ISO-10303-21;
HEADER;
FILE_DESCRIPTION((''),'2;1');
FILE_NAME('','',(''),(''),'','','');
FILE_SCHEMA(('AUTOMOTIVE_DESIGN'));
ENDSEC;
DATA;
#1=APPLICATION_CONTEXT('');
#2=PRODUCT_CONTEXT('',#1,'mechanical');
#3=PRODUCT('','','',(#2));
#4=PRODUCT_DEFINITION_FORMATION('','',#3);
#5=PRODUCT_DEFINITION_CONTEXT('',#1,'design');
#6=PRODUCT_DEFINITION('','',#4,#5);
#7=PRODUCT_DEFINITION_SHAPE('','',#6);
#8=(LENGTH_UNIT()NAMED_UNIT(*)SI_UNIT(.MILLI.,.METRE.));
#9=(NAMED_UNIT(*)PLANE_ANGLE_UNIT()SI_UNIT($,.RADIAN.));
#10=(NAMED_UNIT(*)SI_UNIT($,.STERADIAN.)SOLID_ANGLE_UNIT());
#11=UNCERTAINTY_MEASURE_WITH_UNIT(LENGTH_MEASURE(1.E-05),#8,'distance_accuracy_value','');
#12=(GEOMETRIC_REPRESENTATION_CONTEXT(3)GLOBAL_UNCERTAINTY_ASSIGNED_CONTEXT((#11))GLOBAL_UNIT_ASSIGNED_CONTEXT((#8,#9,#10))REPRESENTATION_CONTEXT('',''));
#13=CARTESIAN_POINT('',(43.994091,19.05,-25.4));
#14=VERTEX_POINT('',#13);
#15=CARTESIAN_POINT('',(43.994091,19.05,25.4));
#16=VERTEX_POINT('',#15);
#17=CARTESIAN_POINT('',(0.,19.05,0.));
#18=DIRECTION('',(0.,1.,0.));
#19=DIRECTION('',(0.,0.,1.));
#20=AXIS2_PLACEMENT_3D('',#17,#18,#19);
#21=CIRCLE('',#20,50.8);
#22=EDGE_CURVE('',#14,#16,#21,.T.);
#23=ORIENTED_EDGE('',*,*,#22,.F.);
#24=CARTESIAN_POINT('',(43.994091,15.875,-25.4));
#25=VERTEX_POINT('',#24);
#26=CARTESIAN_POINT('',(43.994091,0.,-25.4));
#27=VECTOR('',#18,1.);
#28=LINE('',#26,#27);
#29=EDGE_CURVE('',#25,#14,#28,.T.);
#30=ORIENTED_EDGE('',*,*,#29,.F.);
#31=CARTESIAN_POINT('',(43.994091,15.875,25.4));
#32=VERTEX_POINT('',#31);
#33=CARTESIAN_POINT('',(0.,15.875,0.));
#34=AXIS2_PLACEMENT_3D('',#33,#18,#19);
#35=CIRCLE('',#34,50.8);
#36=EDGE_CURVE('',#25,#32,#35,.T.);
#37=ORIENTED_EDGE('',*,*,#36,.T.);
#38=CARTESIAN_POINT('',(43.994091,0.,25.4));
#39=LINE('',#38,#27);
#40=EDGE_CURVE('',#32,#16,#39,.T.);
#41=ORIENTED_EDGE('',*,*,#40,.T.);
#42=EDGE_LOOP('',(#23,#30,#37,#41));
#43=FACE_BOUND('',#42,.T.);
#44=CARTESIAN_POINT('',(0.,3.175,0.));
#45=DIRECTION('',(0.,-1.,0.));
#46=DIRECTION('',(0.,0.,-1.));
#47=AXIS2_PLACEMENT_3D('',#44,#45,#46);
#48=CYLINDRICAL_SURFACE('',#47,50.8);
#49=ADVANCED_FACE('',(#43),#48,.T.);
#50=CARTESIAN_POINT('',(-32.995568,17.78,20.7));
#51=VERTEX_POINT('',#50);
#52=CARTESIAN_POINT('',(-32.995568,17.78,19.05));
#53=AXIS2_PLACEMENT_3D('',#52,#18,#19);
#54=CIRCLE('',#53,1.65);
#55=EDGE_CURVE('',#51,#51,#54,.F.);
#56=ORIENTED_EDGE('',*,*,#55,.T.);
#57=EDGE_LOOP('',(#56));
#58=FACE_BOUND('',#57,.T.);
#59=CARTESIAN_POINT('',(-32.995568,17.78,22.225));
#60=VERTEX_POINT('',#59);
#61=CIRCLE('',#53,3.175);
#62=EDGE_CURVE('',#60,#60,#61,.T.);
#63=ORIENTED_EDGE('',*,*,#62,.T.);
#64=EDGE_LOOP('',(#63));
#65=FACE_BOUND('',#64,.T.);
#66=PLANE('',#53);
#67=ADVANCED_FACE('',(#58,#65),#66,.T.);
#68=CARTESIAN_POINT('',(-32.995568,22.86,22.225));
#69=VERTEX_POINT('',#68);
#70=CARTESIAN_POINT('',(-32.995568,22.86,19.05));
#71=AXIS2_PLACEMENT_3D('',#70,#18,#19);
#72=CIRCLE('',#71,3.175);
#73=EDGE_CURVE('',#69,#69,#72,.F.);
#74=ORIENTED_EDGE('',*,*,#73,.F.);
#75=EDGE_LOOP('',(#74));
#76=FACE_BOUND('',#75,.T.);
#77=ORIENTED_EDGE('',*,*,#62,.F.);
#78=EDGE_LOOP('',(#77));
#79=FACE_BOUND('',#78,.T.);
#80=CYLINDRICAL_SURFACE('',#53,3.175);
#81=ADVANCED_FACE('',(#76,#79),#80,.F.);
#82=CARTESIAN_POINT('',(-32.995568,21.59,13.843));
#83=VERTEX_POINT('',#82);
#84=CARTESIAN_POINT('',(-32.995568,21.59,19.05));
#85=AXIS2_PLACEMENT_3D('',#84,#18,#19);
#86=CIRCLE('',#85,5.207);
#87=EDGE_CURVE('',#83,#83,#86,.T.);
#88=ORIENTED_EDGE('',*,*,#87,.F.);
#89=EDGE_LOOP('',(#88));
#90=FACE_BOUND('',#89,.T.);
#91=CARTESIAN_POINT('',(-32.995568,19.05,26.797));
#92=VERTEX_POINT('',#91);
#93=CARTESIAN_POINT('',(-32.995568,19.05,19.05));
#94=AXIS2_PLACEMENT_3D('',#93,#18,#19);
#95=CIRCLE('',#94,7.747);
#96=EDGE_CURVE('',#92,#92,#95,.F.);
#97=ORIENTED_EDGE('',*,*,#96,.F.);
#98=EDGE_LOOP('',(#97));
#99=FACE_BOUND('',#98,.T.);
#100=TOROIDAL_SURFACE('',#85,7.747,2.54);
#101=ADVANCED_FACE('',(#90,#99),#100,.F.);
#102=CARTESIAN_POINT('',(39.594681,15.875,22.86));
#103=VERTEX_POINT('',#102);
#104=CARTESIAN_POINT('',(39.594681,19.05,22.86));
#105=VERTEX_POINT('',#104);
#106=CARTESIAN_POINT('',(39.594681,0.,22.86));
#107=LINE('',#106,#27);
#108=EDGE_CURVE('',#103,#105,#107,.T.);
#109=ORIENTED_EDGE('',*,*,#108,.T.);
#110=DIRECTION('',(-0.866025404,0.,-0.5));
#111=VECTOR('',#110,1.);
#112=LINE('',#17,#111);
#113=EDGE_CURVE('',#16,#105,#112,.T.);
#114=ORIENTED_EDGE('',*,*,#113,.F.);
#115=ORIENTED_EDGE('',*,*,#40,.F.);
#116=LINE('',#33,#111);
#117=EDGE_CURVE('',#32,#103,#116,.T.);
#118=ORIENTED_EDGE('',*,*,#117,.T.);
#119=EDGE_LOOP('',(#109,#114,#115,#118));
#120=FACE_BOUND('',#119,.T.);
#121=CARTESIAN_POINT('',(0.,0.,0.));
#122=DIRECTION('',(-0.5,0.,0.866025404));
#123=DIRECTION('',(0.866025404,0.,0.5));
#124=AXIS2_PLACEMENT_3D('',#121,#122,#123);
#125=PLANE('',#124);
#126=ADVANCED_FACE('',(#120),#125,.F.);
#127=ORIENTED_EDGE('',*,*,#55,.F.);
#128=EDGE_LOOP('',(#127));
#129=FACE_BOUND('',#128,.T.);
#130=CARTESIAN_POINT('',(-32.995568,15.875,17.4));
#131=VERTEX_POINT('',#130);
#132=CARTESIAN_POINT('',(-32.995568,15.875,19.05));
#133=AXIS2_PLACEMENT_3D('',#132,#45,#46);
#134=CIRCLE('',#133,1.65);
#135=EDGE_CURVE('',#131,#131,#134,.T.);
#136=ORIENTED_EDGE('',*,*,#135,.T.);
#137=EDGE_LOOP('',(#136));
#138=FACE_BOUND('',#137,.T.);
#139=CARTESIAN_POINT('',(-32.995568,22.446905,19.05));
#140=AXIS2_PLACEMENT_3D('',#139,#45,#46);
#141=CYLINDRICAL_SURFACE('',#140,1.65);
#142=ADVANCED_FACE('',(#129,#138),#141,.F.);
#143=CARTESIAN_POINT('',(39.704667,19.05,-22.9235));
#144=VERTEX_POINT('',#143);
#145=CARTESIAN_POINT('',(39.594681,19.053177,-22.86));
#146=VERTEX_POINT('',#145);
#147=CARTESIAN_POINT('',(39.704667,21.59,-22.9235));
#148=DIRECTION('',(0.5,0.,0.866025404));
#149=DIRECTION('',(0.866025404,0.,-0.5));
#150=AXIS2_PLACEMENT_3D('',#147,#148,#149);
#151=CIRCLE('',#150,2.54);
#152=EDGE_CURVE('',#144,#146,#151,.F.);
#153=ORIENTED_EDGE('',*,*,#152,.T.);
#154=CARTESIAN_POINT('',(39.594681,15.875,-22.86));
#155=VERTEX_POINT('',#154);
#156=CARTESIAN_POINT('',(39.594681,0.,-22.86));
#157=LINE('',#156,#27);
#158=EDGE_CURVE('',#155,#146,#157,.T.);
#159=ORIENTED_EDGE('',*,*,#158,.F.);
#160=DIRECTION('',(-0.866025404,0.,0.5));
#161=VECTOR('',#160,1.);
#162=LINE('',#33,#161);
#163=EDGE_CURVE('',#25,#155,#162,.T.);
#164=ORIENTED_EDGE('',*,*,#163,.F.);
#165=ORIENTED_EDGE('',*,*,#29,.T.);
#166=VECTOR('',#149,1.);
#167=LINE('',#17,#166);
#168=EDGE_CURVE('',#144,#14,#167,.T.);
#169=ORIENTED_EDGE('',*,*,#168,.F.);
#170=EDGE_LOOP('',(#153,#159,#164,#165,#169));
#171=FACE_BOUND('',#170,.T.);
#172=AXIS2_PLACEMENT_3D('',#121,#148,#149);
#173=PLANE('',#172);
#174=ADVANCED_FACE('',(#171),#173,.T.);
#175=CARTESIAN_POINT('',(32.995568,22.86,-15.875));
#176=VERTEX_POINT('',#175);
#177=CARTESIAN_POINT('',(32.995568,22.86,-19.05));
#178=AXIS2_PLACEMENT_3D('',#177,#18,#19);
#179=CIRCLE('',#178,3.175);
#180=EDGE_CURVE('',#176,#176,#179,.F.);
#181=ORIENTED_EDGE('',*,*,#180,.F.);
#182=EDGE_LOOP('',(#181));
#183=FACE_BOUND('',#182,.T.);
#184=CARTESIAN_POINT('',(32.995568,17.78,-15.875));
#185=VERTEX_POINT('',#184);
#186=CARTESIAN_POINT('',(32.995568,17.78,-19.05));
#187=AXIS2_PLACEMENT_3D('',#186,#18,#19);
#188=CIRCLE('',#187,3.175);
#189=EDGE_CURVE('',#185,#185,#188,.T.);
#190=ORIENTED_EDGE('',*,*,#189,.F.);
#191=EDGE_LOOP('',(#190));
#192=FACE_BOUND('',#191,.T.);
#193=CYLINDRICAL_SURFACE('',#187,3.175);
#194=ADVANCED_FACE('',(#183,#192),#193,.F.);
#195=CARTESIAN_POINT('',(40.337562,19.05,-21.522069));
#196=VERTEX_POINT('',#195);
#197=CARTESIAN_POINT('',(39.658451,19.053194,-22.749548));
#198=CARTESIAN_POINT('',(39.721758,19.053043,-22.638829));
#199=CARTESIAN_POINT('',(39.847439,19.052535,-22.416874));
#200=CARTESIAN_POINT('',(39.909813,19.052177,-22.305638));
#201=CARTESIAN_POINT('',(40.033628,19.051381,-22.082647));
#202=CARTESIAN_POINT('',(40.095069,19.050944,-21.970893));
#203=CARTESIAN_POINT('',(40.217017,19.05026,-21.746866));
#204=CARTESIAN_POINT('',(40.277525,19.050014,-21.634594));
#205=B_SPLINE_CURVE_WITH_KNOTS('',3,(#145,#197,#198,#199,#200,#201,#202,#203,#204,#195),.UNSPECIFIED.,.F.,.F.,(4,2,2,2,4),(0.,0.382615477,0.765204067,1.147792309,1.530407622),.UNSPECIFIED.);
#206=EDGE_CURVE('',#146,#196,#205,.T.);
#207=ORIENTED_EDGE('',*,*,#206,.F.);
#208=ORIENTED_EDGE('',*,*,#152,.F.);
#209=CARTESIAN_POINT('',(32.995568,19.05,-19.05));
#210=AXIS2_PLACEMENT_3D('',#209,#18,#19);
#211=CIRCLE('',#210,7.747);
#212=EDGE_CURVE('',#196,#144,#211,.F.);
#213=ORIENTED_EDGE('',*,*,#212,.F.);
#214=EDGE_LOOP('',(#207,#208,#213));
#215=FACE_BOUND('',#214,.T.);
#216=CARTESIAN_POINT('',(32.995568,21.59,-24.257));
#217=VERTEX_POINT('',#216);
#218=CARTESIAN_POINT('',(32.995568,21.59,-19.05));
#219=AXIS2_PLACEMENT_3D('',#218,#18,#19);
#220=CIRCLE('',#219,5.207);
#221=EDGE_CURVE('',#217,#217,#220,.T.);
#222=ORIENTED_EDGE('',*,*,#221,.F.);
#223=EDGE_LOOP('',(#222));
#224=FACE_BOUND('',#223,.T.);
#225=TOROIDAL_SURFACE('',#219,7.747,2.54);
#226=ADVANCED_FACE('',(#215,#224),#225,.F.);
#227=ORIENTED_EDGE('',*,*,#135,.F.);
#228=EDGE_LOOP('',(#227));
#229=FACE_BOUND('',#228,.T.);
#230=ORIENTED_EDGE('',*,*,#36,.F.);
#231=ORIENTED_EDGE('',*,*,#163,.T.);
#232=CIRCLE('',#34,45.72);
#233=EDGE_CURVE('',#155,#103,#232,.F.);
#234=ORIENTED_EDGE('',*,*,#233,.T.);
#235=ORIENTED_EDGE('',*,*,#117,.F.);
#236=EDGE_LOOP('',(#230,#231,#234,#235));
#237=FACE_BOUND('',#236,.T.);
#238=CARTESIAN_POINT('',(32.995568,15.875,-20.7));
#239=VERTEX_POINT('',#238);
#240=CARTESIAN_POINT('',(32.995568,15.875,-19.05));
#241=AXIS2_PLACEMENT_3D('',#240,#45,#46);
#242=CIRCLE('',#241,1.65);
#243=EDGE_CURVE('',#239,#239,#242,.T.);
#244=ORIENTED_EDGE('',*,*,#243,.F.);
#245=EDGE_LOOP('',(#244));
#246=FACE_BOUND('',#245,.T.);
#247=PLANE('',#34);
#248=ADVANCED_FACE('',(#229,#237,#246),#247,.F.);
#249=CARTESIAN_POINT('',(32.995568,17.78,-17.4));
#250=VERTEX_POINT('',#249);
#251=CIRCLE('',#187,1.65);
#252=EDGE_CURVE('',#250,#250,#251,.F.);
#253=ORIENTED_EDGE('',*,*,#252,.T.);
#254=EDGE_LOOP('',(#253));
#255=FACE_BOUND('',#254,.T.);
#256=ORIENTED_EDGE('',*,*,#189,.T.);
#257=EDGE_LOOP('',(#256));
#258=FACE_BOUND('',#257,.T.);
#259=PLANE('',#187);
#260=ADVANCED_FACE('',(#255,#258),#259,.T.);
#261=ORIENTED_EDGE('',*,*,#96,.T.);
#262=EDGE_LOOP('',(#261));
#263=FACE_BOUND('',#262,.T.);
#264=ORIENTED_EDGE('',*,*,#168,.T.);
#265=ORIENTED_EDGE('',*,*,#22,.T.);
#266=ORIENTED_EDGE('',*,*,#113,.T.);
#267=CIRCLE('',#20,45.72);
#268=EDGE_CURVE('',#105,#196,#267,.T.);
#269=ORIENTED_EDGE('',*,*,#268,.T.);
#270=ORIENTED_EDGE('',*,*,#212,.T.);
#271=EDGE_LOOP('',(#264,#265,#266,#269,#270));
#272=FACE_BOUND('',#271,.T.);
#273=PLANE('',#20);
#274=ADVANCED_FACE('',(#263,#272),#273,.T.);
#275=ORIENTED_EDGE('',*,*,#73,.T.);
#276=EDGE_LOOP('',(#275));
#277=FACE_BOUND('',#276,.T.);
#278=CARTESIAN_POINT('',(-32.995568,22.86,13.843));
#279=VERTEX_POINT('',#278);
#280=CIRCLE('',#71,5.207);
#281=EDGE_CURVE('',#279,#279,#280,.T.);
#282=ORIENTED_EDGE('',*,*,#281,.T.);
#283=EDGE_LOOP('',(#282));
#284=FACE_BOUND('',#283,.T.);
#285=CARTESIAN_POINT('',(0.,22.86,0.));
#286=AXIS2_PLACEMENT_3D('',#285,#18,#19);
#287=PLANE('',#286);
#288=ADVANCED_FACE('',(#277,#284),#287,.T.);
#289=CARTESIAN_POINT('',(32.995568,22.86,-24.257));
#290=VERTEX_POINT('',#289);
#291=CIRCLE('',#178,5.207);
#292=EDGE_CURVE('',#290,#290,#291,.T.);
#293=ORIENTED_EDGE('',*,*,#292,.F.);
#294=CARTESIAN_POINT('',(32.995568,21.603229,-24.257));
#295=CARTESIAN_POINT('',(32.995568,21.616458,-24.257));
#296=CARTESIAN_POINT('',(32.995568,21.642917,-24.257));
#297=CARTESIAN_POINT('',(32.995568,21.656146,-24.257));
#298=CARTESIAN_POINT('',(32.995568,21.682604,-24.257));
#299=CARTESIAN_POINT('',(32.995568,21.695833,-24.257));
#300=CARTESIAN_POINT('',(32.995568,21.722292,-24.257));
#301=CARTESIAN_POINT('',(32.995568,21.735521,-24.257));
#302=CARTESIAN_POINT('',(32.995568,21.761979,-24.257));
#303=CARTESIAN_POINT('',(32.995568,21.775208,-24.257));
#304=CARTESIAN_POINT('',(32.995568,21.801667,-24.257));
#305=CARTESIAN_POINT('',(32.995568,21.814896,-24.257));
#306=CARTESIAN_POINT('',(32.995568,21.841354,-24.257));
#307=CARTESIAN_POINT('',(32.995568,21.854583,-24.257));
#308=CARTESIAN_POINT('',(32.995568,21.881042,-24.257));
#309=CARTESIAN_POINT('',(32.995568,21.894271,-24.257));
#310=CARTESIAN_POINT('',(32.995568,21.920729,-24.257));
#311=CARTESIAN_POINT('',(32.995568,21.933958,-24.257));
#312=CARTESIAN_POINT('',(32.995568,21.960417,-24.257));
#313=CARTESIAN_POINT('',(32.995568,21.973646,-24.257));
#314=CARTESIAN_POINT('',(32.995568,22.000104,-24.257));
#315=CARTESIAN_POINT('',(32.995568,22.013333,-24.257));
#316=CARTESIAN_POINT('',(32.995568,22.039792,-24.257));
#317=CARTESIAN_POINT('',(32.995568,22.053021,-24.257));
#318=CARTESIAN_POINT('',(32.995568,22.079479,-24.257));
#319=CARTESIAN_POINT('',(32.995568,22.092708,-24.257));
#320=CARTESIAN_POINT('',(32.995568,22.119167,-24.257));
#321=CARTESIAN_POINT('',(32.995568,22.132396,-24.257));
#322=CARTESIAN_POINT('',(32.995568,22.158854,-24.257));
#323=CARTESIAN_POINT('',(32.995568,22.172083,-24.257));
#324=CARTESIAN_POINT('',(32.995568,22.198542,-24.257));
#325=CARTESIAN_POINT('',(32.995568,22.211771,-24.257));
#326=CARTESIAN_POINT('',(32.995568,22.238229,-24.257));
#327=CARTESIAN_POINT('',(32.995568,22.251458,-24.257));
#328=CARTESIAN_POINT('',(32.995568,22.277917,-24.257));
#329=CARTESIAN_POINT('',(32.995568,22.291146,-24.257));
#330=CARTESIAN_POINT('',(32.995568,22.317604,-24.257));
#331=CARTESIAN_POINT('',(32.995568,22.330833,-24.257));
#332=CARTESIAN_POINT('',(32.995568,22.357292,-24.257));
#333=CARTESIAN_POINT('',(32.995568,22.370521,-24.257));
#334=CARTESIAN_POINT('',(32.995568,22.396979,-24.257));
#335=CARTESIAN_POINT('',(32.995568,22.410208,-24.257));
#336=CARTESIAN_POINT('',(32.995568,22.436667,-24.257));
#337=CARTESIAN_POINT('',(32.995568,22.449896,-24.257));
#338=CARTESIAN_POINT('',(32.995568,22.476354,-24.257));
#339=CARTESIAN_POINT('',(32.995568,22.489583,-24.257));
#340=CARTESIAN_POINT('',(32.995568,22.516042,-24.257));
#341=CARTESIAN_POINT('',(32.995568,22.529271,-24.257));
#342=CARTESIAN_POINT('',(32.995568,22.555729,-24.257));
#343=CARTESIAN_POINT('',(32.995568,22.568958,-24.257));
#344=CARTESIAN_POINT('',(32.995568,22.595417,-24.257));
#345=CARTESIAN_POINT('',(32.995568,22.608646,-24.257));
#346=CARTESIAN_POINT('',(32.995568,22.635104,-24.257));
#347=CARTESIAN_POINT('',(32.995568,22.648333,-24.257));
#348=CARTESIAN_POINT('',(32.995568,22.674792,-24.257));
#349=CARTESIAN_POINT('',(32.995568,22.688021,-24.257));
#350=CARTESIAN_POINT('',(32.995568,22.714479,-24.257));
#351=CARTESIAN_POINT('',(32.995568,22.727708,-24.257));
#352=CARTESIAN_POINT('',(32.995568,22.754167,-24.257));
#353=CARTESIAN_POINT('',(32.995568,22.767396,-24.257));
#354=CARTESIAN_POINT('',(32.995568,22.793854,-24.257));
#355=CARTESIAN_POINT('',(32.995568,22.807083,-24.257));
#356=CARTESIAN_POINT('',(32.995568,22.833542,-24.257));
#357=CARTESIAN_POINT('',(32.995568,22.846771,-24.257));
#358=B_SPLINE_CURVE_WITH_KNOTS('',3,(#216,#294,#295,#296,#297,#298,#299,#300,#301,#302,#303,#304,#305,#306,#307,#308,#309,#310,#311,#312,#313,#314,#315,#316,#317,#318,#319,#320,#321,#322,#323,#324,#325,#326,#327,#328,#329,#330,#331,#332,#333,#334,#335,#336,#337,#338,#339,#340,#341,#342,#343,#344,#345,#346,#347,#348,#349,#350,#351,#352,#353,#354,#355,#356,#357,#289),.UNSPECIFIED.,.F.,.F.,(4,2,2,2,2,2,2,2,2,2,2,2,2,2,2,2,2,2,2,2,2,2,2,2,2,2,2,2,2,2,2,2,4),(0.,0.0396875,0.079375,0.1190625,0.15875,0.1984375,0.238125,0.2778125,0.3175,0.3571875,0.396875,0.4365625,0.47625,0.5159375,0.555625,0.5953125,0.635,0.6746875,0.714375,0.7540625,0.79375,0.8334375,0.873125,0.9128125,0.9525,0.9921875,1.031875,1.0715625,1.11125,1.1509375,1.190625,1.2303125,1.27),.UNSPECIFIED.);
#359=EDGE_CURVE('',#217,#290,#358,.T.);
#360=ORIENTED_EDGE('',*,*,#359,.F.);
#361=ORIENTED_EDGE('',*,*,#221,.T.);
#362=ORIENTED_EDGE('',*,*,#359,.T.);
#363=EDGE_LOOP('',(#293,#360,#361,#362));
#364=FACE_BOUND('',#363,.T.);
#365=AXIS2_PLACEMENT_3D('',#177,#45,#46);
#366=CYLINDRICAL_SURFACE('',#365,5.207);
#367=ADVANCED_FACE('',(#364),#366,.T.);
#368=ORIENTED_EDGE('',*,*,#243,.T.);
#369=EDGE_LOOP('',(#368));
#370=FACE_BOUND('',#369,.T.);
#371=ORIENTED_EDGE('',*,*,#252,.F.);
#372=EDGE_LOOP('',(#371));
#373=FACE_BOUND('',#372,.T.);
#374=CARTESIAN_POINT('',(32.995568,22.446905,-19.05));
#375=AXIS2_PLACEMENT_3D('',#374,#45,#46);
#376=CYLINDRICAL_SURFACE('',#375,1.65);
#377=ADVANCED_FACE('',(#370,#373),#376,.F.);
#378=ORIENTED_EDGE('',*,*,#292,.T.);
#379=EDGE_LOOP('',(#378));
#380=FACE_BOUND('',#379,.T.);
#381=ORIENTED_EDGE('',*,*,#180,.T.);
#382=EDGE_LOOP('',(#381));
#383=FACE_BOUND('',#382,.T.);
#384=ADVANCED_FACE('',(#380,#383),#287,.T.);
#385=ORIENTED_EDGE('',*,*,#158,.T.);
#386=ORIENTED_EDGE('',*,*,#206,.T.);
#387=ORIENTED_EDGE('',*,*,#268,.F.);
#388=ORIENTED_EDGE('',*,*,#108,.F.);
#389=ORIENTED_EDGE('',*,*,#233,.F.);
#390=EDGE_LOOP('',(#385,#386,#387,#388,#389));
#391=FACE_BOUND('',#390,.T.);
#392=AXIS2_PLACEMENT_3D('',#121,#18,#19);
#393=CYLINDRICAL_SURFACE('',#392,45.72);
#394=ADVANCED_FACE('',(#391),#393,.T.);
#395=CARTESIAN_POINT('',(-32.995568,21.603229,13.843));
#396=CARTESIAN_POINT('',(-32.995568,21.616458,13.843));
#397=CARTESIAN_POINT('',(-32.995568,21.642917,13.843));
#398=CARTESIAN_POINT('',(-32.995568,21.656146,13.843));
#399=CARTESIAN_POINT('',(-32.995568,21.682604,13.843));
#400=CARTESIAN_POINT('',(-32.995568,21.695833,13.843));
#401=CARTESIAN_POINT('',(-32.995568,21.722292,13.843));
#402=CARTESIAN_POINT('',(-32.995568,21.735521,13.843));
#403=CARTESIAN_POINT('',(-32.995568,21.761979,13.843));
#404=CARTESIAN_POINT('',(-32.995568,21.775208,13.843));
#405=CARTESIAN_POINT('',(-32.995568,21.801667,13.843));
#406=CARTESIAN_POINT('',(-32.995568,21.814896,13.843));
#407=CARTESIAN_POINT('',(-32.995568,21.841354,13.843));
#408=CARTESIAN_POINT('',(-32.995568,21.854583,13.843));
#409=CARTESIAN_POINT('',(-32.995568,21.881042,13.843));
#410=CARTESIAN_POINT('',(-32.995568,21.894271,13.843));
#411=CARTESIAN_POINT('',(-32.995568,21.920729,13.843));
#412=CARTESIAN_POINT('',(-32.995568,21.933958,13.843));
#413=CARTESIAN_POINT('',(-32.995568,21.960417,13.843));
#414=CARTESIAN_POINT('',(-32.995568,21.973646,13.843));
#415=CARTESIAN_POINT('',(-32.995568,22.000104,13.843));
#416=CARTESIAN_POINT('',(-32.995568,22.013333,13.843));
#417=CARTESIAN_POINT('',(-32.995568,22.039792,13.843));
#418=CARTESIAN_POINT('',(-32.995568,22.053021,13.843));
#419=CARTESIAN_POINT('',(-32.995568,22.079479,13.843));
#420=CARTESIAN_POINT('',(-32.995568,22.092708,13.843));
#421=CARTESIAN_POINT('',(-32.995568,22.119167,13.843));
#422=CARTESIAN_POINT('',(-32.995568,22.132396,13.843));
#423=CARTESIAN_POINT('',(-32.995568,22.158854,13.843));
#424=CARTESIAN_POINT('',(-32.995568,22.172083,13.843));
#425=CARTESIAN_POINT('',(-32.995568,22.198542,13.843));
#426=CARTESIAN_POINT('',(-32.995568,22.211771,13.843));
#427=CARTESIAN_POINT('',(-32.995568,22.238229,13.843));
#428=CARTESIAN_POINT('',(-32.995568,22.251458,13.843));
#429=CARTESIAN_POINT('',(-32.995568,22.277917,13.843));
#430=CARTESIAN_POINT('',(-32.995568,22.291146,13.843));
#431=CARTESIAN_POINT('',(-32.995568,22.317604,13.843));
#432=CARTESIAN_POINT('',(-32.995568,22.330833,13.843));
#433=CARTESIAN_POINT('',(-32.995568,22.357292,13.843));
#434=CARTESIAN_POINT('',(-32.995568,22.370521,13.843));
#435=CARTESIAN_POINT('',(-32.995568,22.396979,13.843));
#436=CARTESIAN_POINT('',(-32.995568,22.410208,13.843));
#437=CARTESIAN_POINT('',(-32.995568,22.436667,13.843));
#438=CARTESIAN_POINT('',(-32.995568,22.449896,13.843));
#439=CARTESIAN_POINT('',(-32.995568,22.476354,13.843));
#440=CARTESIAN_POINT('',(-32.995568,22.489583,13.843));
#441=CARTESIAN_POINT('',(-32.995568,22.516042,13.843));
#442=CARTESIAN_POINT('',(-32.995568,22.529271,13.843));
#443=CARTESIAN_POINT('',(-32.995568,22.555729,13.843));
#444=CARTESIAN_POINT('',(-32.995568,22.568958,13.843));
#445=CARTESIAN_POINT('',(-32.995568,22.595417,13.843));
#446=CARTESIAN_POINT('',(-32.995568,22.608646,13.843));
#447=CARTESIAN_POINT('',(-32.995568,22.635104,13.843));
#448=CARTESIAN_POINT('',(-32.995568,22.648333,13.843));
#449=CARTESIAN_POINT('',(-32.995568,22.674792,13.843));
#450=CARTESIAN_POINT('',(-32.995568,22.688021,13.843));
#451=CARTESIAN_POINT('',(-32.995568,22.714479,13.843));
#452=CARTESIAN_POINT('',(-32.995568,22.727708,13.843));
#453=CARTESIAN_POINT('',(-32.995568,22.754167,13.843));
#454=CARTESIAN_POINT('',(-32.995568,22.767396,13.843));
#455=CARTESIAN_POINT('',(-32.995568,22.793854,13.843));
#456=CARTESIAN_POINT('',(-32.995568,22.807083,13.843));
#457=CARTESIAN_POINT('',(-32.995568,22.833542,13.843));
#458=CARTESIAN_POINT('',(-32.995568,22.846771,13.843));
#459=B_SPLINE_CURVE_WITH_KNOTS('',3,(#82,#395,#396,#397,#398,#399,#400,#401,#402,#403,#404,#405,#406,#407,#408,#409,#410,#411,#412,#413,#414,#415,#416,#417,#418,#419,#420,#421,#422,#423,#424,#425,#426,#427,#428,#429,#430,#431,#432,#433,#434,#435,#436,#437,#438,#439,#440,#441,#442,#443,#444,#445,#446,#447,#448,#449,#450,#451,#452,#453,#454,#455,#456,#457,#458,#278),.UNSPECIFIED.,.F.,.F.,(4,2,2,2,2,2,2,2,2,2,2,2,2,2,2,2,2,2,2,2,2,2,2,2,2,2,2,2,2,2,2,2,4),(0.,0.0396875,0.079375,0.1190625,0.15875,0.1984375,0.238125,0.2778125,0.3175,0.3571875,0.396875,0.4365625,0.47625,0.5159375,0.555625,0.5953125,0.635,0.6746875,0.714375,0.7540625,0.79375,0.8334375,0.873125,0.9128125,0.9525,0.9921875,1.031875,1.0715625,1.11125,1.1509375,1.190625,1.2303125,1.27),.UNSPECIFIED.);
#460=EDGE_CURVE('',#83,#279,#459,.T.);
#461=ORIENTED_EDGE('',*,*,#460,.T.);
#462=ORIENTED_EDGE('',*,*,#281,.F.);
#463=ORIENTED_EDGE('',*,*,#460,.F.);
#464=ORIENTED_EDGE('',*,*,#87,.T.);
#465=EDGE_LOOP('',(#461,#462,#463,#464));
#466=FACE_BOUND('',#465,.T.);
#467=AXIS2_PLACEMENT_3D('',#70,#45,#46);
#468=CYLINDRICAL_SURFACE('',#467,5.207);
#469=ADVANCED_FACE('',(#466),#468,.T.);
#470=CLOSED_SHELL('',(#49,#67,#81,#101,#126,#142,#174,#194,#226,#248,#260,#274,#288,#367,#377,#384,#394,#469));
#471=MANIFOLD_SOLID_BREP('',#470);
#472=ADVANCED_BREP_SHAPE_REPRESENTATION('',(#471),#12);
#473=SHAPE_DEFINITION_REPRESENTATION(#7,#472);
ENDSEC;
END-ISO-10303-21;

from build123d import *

# Parameters (mm, degrees)
SKETCH1_R            = 50.8
SKETCH1_R_2          = 48.8
SKETCH1_R_3          = 1.905
BOSS_EXTRUDE1_DEPTH  = 3.175
SKETCH3_R            = 50.8
SKETCH3_R_2          = 48.8
BOSS_EXTRUDE3_DEPTH  = 12.7
CUT_EXTRUDE1_DEPTH   = 73.955945611
FILLET2_R            = 6.35
SKETCH5_R            = 1.905
SKETCH5_W            = 16.479
SKETCH5_H            = 6
BOSS_EXTRUDE4_DEPTH  = 1
CUT_EXTRUDE2_DEPTH   = 74.575102096
BOSS_EXTRUDE5_DEPTH  = 12.7
SKETCH10_R           = 1.5
CUT_EXTRUDE4_DEPTH   = 73.95594575
BOSS_EXTRUDE7_START  = 12.7
SKETCH11_R           = 4.04
SKETCH11_R_2         = 1.5
BOSS_EXTRUDE7_DEPTH  = 12.7
BOSS_EXTRUDE8_START  = 38.1
BOSS_EXTRUDE8_DEPTH  = 38.1
FILLET4_R            = 3.175
BOSS_EXTRUDE9_DEPTH  = 15.24
SKETCH14_R           = 1.5
BOSS_EXTRUDE10_DEPTH = 3.175
CUT_EXTRUDE5_DEPTH   = 69.215
SKETCH16_R           = 3.175
CUT_EXTRUDE6_DEPTH   = 1.27
BOSS_EXTRUDE11_START = 3.81
SKETCH17_R           = 5.207
SKETCH17_R_2         = 3.175
BOSS_EXTRUDE11_DEPTH = 3.81
FILLET5_R            = 2.54
SKETCH18_R           = 1.65
CUT_EXTRUDE7_DEPTH   = 1.905


with BuildPart() as part:
    # Sketch1 → Boss-Extrude1 (new body)
    # profile 1 of 2: a face of its own
    with BuildSketch(Plane(origin=(0, 0, 0), x_dir=(1, 0, 0), z_dir=(0, 1, 0))):
        with Locations(Location((0, 0, 0), (0, 0, 270))):
            Circle(SKETCH1_R)
        Circle(SKETCH1_R_2, mode=Mode.SUBTRACT)
    # profile 2 of 2: a face of its own
    with BuildSketch(Plane(origin=(0, 0, 0), x_dir=(1, 0, 0), z_dir=(0, 1, 0))):
        Circle(SKETCH1_R_2)
        with Locations(Location((-13.1445, 33.02, 0), (0, 0, 270))):
            Circle(SKETCH1_R_3, mode=Mode.SUBTRACT)
        with Locations(Location((13.1445, 33.02, 0), (0, 0, 270))):
            Circle(SKETCH1_R_3, mode=Mode.SUBTRACT)
    extrude(amount=BOSS_EXTRUDE1_DEPTH)

    # Sketch3 → Boss-Extrude3 (add)
    with BuildSketch(Plane(origin=(0, 3.175, 0), x_dir=(1, 0, 0), z_dir=(0, 1, 0))):
        with Locations(Location((0, 0, 0), (0, 0, 270))):
            Circle(SKETCH3_R)
        with Locations(Location((0, 0, 0), (0, 0, 90))):
            Circle(SKETCH3_R_2, mode=Mode.SUBTRACT)
    extrude(amount=BOSS_EXTRUDE3_DEPTH)

    # Sketch4 → Cut-Extrude1 (cut, through all)
    with BuildSketch(Plane(origin=(0, 3.175, 0), x_dir=(1, 0, 0), z_dir=(0, 1, 0))):
        with BuildLine():
            Line((25.4, -38.01523905), (25.4, -20.834346642))
            add(Edge.make_bspline(
                [(-25.4, -20.834346642), (0, -32.254229315), (25.4, -20.834346642)],
                knots=[0, 0, 0, 1, 1, 1], degree=2))
            Line((-25.4, -20.834346642), (-25.4, -38.01523905))
            ThreePointArc((-25.4, -38.01523905), (0, -45.72), (25.4, -38.01523905))
        make_face()
    extrude(amount=-CUT_EXTRUDE1_DEPTH, mode=Mode.SUBTRACT)

    # Fillet2
    fillet2_edges = [part.edges().sort_by_distance(p)[0] for p in [
        (25.4, 1.5875, 20.834346642),
        (-25.4, 1.5875, 20.834346642),
        (-25.4, 1.5875, 38.01523905),
        (25.4, 1.5875, 38.01523905),
    ]]
    fillet(fillet2_edges, radius=FILLET2_R)

    # Sketch5 → Boss-Extrude4 (add)
    # profile 1 of 8: a face of its own
    with BuildSketch(Plane(origin=(0, 3.175, 0), x_dir=(1, 0, 0), z_dir=(0, 1, 0))):
        with BuildLine():
            Line((13.1445, 37.925), (-13.1445, 37.925))
            ThreePointArc((-13.1445, 37.925), (-9.676141238, 36.488358762), (-8.2395, 33.02))
            Line((-8.2395, 33.02), (-8.2395, 28.115))
            Line((-8.2395, 28.115), (8.2395, 28.115))
            Line((8.2395, 28.115), (8.2395, 33.02))
            ThreePointArc((8.2395, 33.02), (9.676141238, 36.488358762), (13.1445, 37.925))
        make_face()
    # profile 2 of 8: a face of its own
    with BuildSketch(Plane(origin=(0, 3.175, 0), x_dir=(1, 0, 0), z_dir=(0, 1, 0))):
        with BuildLine():
            ThreePointArc((-8.2395, 33.02), (-9.676141238, 36.488358762), (-13.1445, 37.925))
            ThreePointArc((-13.1445, 37.925), (-16.612858762, 36.488358762), (-18.0495, 33.02))
            ThreePointArc((-18.0495, 33.02), (-16.612858762, 29.551641238), (-13.1445, 28.115))
            ThreePointArc((-13.1445, 28.115), (-9.676141238, 29.551641238), (-8.2395, 33.02))
        make_face()
        with Locations(Location((-13.1445, 33.02, 0), (0, 0, 270))):
            Circle(SKETCH5_R, mode=Mode.SUBTRACT)
    # profile 3 of 8: a face of its own
    with BuildSketch(Plane(origin=(0, 3.175, 0), x_dir=(1, 0, 0), z_dir=(0, 1, 0))):
        with BuildLine():
            ThreePointArc((18.0495, 33.02), (16.612858762, 36.488358762), (13.1445, 37.925))
            ThreePointArc((13.1445, 37.925), (9.676141238, 36.488358762), (8.2395, 33.02))
            ThreePointArc((8.2395, 33.02), (9.676141238, 29.551641238), (13.1445, 28.115))
            ThreePointArc((13.1445, 28.115), (16.612858762, 29.551641238), (18.0495, 33.02))
        make_face()
        with Locations(Location((13.1445, 33.02, 0), (0, 0, 270))):
            Circle(SKETCH5_R, mode=Mode.SUBTRACT)
    # profile 4 of 8: a face of its own
    with BuildSketch(Plane(origin=(0, 3.175, 0), x_dir=(1, 0, 0), z_dir=(0, 1, 0))):
        with BuildLine():
            Line((-8.2395, 28.115), (-8.2395, 33.02))
            ThreePointArc((-8.2395, 33.02), (-9.676141238, 29.551641238), (-13.1445, 28.115))
            Line((-13.1445, 28.115), (-8.2395, 28.115))
        make_face()
    # profile 5 of 8: a face of its own
    with BuildSketch(Plane(origin=(0, 3.175, 0), x_dir=(1, 0, 0), z_dir=(0, 1, 0))):
        with BuildLine():
            ThreePointArc((-13.1445, 28.115), (-16.612858762, 29.551641238), (-18.0495, 33.02))
            Line((-18.0495, 33.02), (-18.0495, -23.729829016))
            add(Edge.make_bspline(
                [(-17.200482213, -23.925830908), (-17.339134534, -23.883616376), (-17.479112922, -23.845147844), (-17.620279441, -23.81048615), (-17.762494237, -23.779683986), (-17.905615595, -23.752786017), (-18.049499996, -23.729828993)],
                knots=[0, 0, 0, 0, 0, 0, 0, 0.074218898, 0.074218898, 0.074218898, 0.074218898, 0.074218898, 0.074218898, 0.074218898], degree=6))
            add(Edge.make_bspline(
                [(-17.200482213, -23.925830908), (-12.719991107, -25.289975642), (-8.2395, -25.943438167)],
                knots=[0.16140783, 0.16140783, 0.16140783, 0.337805118, 0.337805118, 0.337805118], degree=2))
            Line((-8.2395, -25.943438167), (-8.2395, -2.461719083))
            Line((-8.2395, -2.461719083), (-8.2395, 3.538280917))
            Line((-8.2395, 3.538280917), (-8.2395, 28.115))
            Line((-8.2395, 28.115), (-13.1445, 28.115))
        make_face()
    # profile 6 of 8: a face of its own
    with BuildSketch(Plane(origin=(0, 3.175, 0), x_dir=(1, 0, 0), z_dir=(0, 1, 0))):
        with BuildLine():
            Line((18.0495, -23.729829016), (18.0495, 33.02))
            ThreePointArc((18.0495, 33.02), (16.612858762, 29.551641238), (13.1445, 28.115))
            Line((13.1445, 28.115), (8.2395, 28.115))
            Line((8.2395, 28.115), (8.2395, 3.538280917))
            Line((8.2395, 3.538280917), (8.2395, -2.461719083))
            Line((8.2395, -2.461719083), (8.2395, -25.943438167))
            add(Edge.make_bspline(
                [(8.2395, -25.943438167), (12.719991107, -25.289975642), (17.200482213, -23.925830908)],
                knots=[0.662194882, 0.662194882, 0.662194882, 0.83859217, 0.83859217, 0.83859217], degree=2))
            add(Edge.make_bspline(
                [(18.049499996, -23.729828993), (17.905615595, -23.752786017), (17.762494237, -23.779683986), (17.620279441, -23.81048615), (17.479112922, -23.845147844), (17.339134534, -23.883616376), (17.200482213, -23.925830908)],
                knots=[0.925781102, 0.925781102, 0.925781102, 0.925781102, 0.925781102, 0.925781102, 0.925781102, 1, 1, 1, 1, 1, 1, 1], degree=6))
        make_face()
    # profile 7 of 8: a face of its own
    with BuildSketch(Plane(origin=(0, 3.175, 0), x_dir=(1, 0, 0), z_dir=(0, 1, 0))):
        with BuildLine():
            ThreePointArc((13.1445, 28.115), (9.676141238, 29.551641238), (8.2395, 33.02))
            Line((8.2395, 33.02), (8.2395, 28.115))
            Line((8.2395, 28.115), (13.1445, 28.115))
        make_face()
    # profile 8 of 8: a face of its own
    with BuildSketch(Plane(origin=(0, 3.175, 0), x_dir=(1, 0, 0), z_dir=(0, 1, 0))):
        with Locations((0, 0.538280917)):
            Rectangle(SKETCH5_W, SKETCH5_H)
    extrude(amount=BOSS_EXTRUDE4_DEPTH)

    # Sketch6 → Cut-Extrude2 (cut, through all)
    with BuildSketch(Plane(origin=(0, 15.875, 0), x_dir=(1, 0, 0), z_dir=(0, 1, 0))):
        with BuildLine():
            Line((42.262039705, 24.4), (39.594681461, 22.86))
            ThreePointArc((39.594681461, 22.86), (44.162128778, 11.833206742), (45.72, 0))
            Line((45.72, 0), (48.8, 0))
            ThreePointArc((48.8, 0), (47.137180323, 12.630369401), (42.262039705, 24.4))
        make_face()
        with BuildLine():
            ThreePointArc((45.72, 0), (44.162128778, -11.833206742), (39.594681461, -22.86))
            Line((39.594681461, -22.86), (42.262039705, -24.4))
            ThreePointArc((42.262039705, -24.4), (47.137180323, -12.630369401), (48.8, 0))
            Line((48.8, 0), (45.72, 0))
        make_face()
        with BuildLine():
            ThreePointArc((48.8, 0), (47.137180323, -12.630369401), (42.262039705, -24.4))
            Line((42.262039705, -24.4), (43.994090512, -25.4))
            ThreePointArc((43.994090512, -25.4), (49.069031975, -13.148007491), (50.8, 0))
            Line((50.8, 0), (48.8, 0))
        make_face()
        with BuildLine():
            Line((43.994090512, 25.4), (42.262039705, 24.4))
            ThreePointArc((42.262039705, 24.4), (47.137180323, 12.630369401), (48.8, 0))
            Line((48.8, 0), (50.8, 0))
            ThreePointArc((50.8, 0), (49.069031975, 13.148007491), (43.994090512, 25.4))
        make_face()
    extrude(amount=-CUT_EXTRUDE2_DEPTH, mode=Mode.SUBTRACT)

    # Sketch7 → Boss-Extrude5 (add)
    with BuildSketch(Plane(origin=(0, 3.175, 0), x_dir=(1, 0, 0), z_dir=(0, 1, 0))):
        with BuildLine():
            Line((42.262039705, -24.4), (39.594681461, -22.86))
            ThreePointArc((39.594681461, -22.86), (45.72, 0), (39.594681461, 22.86))
            Line((39.594681461, 22.86), (42.262039705, 24.4))
            ThreePointArc((42.262039705, 24.4), (41.753056776, 25.261081723), (41.226531944, 26.111550392))
            Line((41.226531944, 26.111550392), (36.822993007, 23.569166002))
            ThreePointArc((36.822993007, 23.569166002), (43.72, 0), (36.822993007, -23.569166002))
            Line((36.822993007, -23.569166002), (41.226531944, -26.111550392))
            ThreePointArc((41.226531944, -26.111550392), (41.753056776, -25.261081723), (42.262039705, -24.4))
        make_face()
    extrude(amount=BOSS_EXTRUDE5_DEPTH)

    # Sketch10 → Cut-Extrude4 (cut, through all)
    with BuildSketch(Plane(origin=(0, 3.175, 0), x_dir=(1, 0, 0), z_dir=(0, 1, 0))):
        with Locations(Location((-32.995567884, -19.05, 0), (0, 0, 270))):
            Circle(SKETCH10_R)
        with Locations(Location((32.995567884, 19.05, 0), (0, 0, 270))):
            Circle(SKETCH10_R)
    extrude(amount=-CUT_EXTRUDE4_DEPTH, mode=Mode.SUBTRACT)

    # Sketch11 → Boss-Extrude7 (add)
    # profile 1 of 3: a face of its own
    with BuildSketch(Plane(origin=(0, 3.175, 0), x_dir=(1, 0, 0), z_dir=(0, 1, 0)).offset(BOSS_EXTRUDE7_START)):
        with BuildLine():
            Line((37.125332322, 23.09), (32.995567884, 23.09))
            ThreePointArc((32.995567884, 23.09), (35.85227928, 21.906711396), (37.035567884, 19.05))
            ThreePointArc((37.035567884, 19.05), (35.85227928, 16.193288604), (32.995567884, 15.01))
            Line((32.995567884, 15.01), (41.062614383, 15.01))
            ThreePointArc((41.062614383, 15.01), (39.302167275, 19.151450272), (37.125332322, 23.09))
        make_face()
    # profile 2 of 3: a face of its own
    with BuildSketch(Plane(origin=(0, 3.175, 0), x_dir=(1, 0, 0), z_dir=(0, 1, 0)).offset(BOSS_EXTRUDE7_START)):
        with Locations((32.995567884, 19.05)):
            Circle(SKETCH11_R)
        with Locations(Location((32.995567884, 19.05, 0), (0, 0, 270))):
            Circle(SKETCH11_R_2, mode=Mode.SUBTRACT)
    # profile 3 of 3: a face of its own
    with BuildSketch(Plane(origin=(0, 3.175, 0), x_dir=(1, 0, 0), z_dir=(0, 1, 0)).offset(BOSS_EXTRUDE7_START)):
        with Locations(Location((-32.995567884, -19.05, 0), (0, 0, 270))):
            Circle(SKETCH11_R)
        with Locations(Location((-32.995567884, -19.05, 0), (0, 0, 270))):
            Circle(SKETCH11_R_2, mode=Mode.SUBTRACT)
    extrude(amount=-BOSS_EXTRUDE7_DEPTH)

    # Sketch12 → Boss-Extrude8 (add)
    with BuildSketch(Plane.XZ.offset(BOSS_EXTRUDE8_START)):
        with BuildLine():
            ThreePointArc((28.584071469, 41.995128982), (29.185832393, 29.185832393), (41.995128982, 28.584071469))
            ThreePointArc((41.995128982, 28.584071469), (35.921024484, 35.921024484), (28.584071469, 41.995128982))
        make_face()
        with BuildLine():
            ThreePointArc((28.584071469, -41.995128982), (35.921024484, -35.921024484), (41.995128982, -28.584071469))
            ThreePointArc((41.995128982, -28.584071469), (29.185832393, -29.185832393), (28.584071469, -41.995128982))
        make_face()
        with BuildLine():
            ThreePointArc((-41.995128982, 28.584071469), (-29.185832393, 29.185832393), (-28.584071469, 41.995128982))
            ThreePointArc((-28.584071469, 41.995128982), (-35.921024484, 35.921024484), (-41.995128982, 28.584071469))
        make_face()
        with BuildLine():
            ThreePointArc((-41.995128982, -28.584071469), (-35.921024484, -35.921024484), (-28.584071469, -41.995128982))
            ThreePointArc((-28.584071469, -41.995128982), (-29.185832393, -29.185832393), (-41.995128982, -28.584071469))
        make_face()
    extrude(amount=-BOSS_EXTRUDE8_DEPTH)

    # Fillet4
    fillet4_edges = [part.edges().sort_by_distance(p)[0] for p in [
        (41.995128982, -19.05, 28.584071469),
        (28.584071469, -19.05, 41.995128982),
        (28.584071469, -19.05, -41.995128982),
        (41.995128982, -19.05, -28.584071469),
        (-28.584071469, -19.05, 41.995128982),
        (-41.995128982, -19.05, 28.584071469),
        (-41.995128982, -19.05, -28.584071469),
        (-28.584071469, -19.05, -41.995128982),
    ]]
    fillet(fillet4_edges, radius=FILLET4_R)

    # Sketch13 → Boss-Extrude9 (add)
    with BuildSketch(Plane.XZ.offset(38.1)):
        Polygon((35.022998872, 35.022998872), (30.532870812, 39.513126933), (26.940768363, 35.921024484), (35.921024484, 26.940768363), (39.513126933, 30.532870812), align=None)
        Polygon((26.741716429, -35.72197255), (35.72197255, -26.741716429), (39.314074999, -30.333818878), (34.823946938, -34.823946938), (30.333818878, -39.314074999), align=None)
        Polygon((-35.921024484, -26.542664495), (-26.940768363, -35.522920616), (-30.532870812, -39.115023065), (-35.022998872, -34.624895004), (-39.513126933, -30.134766943), align=None)
        Polygon((-26.741716429, 36.120076418), (-35.72197255, 27.139820297), (-39.314074999, 30.731922746), (-34.823946938, 35.222050806), (-30.333818878, 39.712178867), align=None)
    extrude(amount=BOSS_EXTRUDE9_DEPTH)

    # Sketch14 → Boss-Extrude10 (add)
    # profile 1 of 2: a face of its own
    with BuildSketch(Plane(origin=(0, 15.875, 0), x_dir=(1, 0, 0), z_dir=(0, 1, 0))):
        with BuildLine():
            ThreePointArc((43.994090512, 25.4), (-50.8, 0), (43.994090512, -25.4))
            Line((43.994090512, -25.4), (39.594681461, -22.86))
            ThreePointArc((39.594681461, -22.86), (45.72, 0), (39.594681461, 22.86))
            Line((39.594681461, 22.86), (43.994090512, 25.4))
        make_face()
        with Locations(Location((32.995567884, 19.05, 0), (0, 0, 270))):
            Circle(SKETCH14_R, mode=Mode.SUBTRACT)
        with BuildLine():
            ThreePointArc((41.062614383, 15.01), (43.458370563, -4.775817), (36.822993007, -23.569166002))
            Line((36.822993007, -23.569166002), (41.226531944, -26.111550392))
            ThreePointArc((41.226531944, -26.111550392), (-48.8, 0), (41.226531944, 26.111550392))
            Line((41.226531944, 26.111550392), (36.822993007, 23.569166002))
            ThreePointArc((36.822993007, 23.569166002), (36.974938874, 23.330072766), (37.125332322, 23.09))
            Line((37.125332322, 23.09), (32.995567884, 23.09))
            ThreePointArc((32.995567884, 23.09), (28.955567884, 19.05), (32.995567884, 15.01))
            Line((32.995567884, 15.01), (41.062614383, 15.01))
        make_face(mode=Mode.SUBTRACT)
    # profile 2 of 2: a face of its own
    with BuildSketch(Plane(origin=(0, 15.875, 0), x_dir=(1, 0, 0), z_dir=(0, 1, 0))):
        with BuildLine():
            Line((36.822993007, -23.569166002), (41.226531944, -26.111550392))
            ThreePointArc((41.226531944, -26.111550392), (-48.8, 0), (41.226531944, 26.111550392))
            Line((41.226531944, 26.111550392), (36.822993007, 23.569166002))
            ThreePointArc((36.822993007, 23.569166002), (36.974938874, 23.330072766), (37.125332322, 23.09))
            Line((37.125332322, 23.09), (32.995567884, 23.09))
            ThreePointArc((32.995567884, 23.09), (28.955567884, 19.05), (32.995567884, 15.01))
            Line((32.995567884, 15.01), (41.062614383, 15.01))
            ThreePointArc((41.062614383, 15.01), (43.458370563, -4.775817), (36.822993007, -23.569166002))
        make_face()
        with Locations(Location((-32.995567884, -19.05, 0), (0, 0, 270))):
            Circle(SKETCH14_R, mode=Mode.SUBTRACT)
    extrude(amount=BOSS_EXTRUDE10_DEPTH)

    # Sketch15 → Cut-Extrude5 (cut)
    with BuildSketch(Plane.XZ.offset(53.34)):
        Polygon((-90.577857324, 69.263738682), (77.84239147, 62.337364813), (72.519121415, -67.102149145), (-95.901127379, -60.175775277), align=None)
    extrude(amount=-CUT_EXTRUDE5_DEPTH, mode=Mode.SUBTRACT)

    # Sketch16 → Cut-Extrude6 (cut)
    with BuildSketch(Plane(origin=(0, 19.05, 0), x_dir=(1, 0, 0), z_dir=(0, 1, 0))):
        with Locations(Location((-32.995567884, -19.05, 0), (0, 0, 270))):
            Circle(SKETCH16_R)
        with Locations(Location((32.995567884, 19.05, 0), (0, 0, 270))):
            Circle(SKETCH16_R)
    extrude(amount=-CUT_EXTRUDE6_DEPTH, mode=Mode.SUBTRACT)

    # Sketch17 → Boss-Extrude11 (add)
    # profile 1 of 2: a face of its own
    with BuildSketch(Plane(origin=(0, 19.05, 0), x_dir=(1, 0, 0), z_dir=(0, 1, 0)).offset(BOSS_EXTRUDE11_START)):
        with Locations(Location((-32.995567884, -19.05, 0), (0, 0, 90))):
            Circle(SKETCH17_R)
        with Locations(Location((-32.995567884, -19.05, 0), (0, 0, 270))):
            Circle(SKETCH17_R_2, mode=Mode.SUBTRACT)
    # profile 2 of 2: a face of its own
    with BuildSketch(Plane(origin=(0, 19.05, 0), x_dir=(1, 0, 0), z_dir=(0, 1, 0)).offset(BOSS_EXTRUDE11_START)):
        with Locations(Location((32.995567884, 19.05, 0), (0, 0, 90))):
            Circle(SKETCH17_R)
        with Locations(Location((32.995567884, 19.05, 0), (0, 0, 270))):
            Circle(SKETCH17_R_2, mode=Mode.SUBTRACT)
    extrude(amount=-BOSS_EXTRUDE11_DEPTH)

    # Fillet5
    # the kernel refuses this fillet: 2.54 mm, written as the material it adds along each edge
    with BuildSketch(Plane(origin=(-32.995567884, 19.05, 19.05), x_dir=(0, 0, -1), z_dir=(1, 0, 0))) as fillet5_piece_1:
        with BuildLine():
            CenterArc((5.207 + FILLET5_R, FILLET5_R), FILLET5_R, 180, 90)
            Line((5.207, FILLET5_R), (5.207, 0))
            Line((5.207, 0), (5.207 + FILLET5_R, 0))
        make_face()
    revolve(axis=Axis((-32.995567884, 19.05, 19.05), (0, 1, 0)))
    with BuildSketch(Plane(origin=(32.995567884, 19.05, -19.05), x_dir=(0, 0, -1), z_dir=(1, 0, 0))) as fillet5_piece_2_section:
        with BuildLine():
            CenterArc((5.207 + FILLET5_R, FILLET5_R), FILLET5_R, 180, 90)
            Line((5.207, FILLET5_R), (5.207, 0))
            Line((5.207, 0), (5.207 + FILLET5_R, 0))
        make_face()
    fillet5_piece_2 = revolve(axis=Axis((32.995567884, 19.05, -19.05), (0, 1, 0)), mode=Mode.PRIVATE)
    fillet5_piece_2 = split(fillet5_piece_2, bisect_by=Plane(origin=(30.427698254, 19.773240888, -17.567439778), z_dir=(-0.5000000000000018, 0, -0.8660254037844376)), keep=Keep.TOP, mode=Mode.PRIVATE)
    add(fillet5_piece_2)
    with BuildSketch(Plane(origin=(32.995567884, 19.05, -19.05), x_dir=(0, 0, -1), z_dir=(1, 0, 0))) as fillet5_piece_3_section:
        with BuildLine():
            CenterArc((5.207 + FILLET5_R, FILLET5_R), FILLET5_R, 180, 90)
            Line((5.207, FILLET5_R), (5.207, 0))
            Line((5.207, 0), (5.207 + FILLET5_R, 0))
        make_face()
    fillet5_piece_3 = revolve(axis=Axis((32.995567884, 19.05, -19.05), (0, 1, 0)), mode=Mode.PRIVATE)
    fillet5_piece_3 = fillet5_piece_3 & Plane(origin=(0, 19.77324089, 0), x_dir=(0.8660254037844378, 0, 0.5000000000000014), z_dir=(0, -1, 0)) * Cylinder(45.72, 31, mode=Mode.PRIVATE)
    add(fillet5_piece_3)

    # Sketch18 → Cut-Extrude7 (cut)
    with BuildSketch(Plane.XZ.offset(-15.875)):
        with Locations(Location((-32.995567884, 19.05, 0), (0, 0, 270))):
            Circle(SKETCH18_R)
        with Locations(Location((32.995567884, -19.05, 0), (0, 0, 270))):
            Circle(SKETCH18_R)
    extrude(amount=-CUT_EXTRUDE7_DEPTH, mode=Mode.SUBTRACT)


solid = part.part
